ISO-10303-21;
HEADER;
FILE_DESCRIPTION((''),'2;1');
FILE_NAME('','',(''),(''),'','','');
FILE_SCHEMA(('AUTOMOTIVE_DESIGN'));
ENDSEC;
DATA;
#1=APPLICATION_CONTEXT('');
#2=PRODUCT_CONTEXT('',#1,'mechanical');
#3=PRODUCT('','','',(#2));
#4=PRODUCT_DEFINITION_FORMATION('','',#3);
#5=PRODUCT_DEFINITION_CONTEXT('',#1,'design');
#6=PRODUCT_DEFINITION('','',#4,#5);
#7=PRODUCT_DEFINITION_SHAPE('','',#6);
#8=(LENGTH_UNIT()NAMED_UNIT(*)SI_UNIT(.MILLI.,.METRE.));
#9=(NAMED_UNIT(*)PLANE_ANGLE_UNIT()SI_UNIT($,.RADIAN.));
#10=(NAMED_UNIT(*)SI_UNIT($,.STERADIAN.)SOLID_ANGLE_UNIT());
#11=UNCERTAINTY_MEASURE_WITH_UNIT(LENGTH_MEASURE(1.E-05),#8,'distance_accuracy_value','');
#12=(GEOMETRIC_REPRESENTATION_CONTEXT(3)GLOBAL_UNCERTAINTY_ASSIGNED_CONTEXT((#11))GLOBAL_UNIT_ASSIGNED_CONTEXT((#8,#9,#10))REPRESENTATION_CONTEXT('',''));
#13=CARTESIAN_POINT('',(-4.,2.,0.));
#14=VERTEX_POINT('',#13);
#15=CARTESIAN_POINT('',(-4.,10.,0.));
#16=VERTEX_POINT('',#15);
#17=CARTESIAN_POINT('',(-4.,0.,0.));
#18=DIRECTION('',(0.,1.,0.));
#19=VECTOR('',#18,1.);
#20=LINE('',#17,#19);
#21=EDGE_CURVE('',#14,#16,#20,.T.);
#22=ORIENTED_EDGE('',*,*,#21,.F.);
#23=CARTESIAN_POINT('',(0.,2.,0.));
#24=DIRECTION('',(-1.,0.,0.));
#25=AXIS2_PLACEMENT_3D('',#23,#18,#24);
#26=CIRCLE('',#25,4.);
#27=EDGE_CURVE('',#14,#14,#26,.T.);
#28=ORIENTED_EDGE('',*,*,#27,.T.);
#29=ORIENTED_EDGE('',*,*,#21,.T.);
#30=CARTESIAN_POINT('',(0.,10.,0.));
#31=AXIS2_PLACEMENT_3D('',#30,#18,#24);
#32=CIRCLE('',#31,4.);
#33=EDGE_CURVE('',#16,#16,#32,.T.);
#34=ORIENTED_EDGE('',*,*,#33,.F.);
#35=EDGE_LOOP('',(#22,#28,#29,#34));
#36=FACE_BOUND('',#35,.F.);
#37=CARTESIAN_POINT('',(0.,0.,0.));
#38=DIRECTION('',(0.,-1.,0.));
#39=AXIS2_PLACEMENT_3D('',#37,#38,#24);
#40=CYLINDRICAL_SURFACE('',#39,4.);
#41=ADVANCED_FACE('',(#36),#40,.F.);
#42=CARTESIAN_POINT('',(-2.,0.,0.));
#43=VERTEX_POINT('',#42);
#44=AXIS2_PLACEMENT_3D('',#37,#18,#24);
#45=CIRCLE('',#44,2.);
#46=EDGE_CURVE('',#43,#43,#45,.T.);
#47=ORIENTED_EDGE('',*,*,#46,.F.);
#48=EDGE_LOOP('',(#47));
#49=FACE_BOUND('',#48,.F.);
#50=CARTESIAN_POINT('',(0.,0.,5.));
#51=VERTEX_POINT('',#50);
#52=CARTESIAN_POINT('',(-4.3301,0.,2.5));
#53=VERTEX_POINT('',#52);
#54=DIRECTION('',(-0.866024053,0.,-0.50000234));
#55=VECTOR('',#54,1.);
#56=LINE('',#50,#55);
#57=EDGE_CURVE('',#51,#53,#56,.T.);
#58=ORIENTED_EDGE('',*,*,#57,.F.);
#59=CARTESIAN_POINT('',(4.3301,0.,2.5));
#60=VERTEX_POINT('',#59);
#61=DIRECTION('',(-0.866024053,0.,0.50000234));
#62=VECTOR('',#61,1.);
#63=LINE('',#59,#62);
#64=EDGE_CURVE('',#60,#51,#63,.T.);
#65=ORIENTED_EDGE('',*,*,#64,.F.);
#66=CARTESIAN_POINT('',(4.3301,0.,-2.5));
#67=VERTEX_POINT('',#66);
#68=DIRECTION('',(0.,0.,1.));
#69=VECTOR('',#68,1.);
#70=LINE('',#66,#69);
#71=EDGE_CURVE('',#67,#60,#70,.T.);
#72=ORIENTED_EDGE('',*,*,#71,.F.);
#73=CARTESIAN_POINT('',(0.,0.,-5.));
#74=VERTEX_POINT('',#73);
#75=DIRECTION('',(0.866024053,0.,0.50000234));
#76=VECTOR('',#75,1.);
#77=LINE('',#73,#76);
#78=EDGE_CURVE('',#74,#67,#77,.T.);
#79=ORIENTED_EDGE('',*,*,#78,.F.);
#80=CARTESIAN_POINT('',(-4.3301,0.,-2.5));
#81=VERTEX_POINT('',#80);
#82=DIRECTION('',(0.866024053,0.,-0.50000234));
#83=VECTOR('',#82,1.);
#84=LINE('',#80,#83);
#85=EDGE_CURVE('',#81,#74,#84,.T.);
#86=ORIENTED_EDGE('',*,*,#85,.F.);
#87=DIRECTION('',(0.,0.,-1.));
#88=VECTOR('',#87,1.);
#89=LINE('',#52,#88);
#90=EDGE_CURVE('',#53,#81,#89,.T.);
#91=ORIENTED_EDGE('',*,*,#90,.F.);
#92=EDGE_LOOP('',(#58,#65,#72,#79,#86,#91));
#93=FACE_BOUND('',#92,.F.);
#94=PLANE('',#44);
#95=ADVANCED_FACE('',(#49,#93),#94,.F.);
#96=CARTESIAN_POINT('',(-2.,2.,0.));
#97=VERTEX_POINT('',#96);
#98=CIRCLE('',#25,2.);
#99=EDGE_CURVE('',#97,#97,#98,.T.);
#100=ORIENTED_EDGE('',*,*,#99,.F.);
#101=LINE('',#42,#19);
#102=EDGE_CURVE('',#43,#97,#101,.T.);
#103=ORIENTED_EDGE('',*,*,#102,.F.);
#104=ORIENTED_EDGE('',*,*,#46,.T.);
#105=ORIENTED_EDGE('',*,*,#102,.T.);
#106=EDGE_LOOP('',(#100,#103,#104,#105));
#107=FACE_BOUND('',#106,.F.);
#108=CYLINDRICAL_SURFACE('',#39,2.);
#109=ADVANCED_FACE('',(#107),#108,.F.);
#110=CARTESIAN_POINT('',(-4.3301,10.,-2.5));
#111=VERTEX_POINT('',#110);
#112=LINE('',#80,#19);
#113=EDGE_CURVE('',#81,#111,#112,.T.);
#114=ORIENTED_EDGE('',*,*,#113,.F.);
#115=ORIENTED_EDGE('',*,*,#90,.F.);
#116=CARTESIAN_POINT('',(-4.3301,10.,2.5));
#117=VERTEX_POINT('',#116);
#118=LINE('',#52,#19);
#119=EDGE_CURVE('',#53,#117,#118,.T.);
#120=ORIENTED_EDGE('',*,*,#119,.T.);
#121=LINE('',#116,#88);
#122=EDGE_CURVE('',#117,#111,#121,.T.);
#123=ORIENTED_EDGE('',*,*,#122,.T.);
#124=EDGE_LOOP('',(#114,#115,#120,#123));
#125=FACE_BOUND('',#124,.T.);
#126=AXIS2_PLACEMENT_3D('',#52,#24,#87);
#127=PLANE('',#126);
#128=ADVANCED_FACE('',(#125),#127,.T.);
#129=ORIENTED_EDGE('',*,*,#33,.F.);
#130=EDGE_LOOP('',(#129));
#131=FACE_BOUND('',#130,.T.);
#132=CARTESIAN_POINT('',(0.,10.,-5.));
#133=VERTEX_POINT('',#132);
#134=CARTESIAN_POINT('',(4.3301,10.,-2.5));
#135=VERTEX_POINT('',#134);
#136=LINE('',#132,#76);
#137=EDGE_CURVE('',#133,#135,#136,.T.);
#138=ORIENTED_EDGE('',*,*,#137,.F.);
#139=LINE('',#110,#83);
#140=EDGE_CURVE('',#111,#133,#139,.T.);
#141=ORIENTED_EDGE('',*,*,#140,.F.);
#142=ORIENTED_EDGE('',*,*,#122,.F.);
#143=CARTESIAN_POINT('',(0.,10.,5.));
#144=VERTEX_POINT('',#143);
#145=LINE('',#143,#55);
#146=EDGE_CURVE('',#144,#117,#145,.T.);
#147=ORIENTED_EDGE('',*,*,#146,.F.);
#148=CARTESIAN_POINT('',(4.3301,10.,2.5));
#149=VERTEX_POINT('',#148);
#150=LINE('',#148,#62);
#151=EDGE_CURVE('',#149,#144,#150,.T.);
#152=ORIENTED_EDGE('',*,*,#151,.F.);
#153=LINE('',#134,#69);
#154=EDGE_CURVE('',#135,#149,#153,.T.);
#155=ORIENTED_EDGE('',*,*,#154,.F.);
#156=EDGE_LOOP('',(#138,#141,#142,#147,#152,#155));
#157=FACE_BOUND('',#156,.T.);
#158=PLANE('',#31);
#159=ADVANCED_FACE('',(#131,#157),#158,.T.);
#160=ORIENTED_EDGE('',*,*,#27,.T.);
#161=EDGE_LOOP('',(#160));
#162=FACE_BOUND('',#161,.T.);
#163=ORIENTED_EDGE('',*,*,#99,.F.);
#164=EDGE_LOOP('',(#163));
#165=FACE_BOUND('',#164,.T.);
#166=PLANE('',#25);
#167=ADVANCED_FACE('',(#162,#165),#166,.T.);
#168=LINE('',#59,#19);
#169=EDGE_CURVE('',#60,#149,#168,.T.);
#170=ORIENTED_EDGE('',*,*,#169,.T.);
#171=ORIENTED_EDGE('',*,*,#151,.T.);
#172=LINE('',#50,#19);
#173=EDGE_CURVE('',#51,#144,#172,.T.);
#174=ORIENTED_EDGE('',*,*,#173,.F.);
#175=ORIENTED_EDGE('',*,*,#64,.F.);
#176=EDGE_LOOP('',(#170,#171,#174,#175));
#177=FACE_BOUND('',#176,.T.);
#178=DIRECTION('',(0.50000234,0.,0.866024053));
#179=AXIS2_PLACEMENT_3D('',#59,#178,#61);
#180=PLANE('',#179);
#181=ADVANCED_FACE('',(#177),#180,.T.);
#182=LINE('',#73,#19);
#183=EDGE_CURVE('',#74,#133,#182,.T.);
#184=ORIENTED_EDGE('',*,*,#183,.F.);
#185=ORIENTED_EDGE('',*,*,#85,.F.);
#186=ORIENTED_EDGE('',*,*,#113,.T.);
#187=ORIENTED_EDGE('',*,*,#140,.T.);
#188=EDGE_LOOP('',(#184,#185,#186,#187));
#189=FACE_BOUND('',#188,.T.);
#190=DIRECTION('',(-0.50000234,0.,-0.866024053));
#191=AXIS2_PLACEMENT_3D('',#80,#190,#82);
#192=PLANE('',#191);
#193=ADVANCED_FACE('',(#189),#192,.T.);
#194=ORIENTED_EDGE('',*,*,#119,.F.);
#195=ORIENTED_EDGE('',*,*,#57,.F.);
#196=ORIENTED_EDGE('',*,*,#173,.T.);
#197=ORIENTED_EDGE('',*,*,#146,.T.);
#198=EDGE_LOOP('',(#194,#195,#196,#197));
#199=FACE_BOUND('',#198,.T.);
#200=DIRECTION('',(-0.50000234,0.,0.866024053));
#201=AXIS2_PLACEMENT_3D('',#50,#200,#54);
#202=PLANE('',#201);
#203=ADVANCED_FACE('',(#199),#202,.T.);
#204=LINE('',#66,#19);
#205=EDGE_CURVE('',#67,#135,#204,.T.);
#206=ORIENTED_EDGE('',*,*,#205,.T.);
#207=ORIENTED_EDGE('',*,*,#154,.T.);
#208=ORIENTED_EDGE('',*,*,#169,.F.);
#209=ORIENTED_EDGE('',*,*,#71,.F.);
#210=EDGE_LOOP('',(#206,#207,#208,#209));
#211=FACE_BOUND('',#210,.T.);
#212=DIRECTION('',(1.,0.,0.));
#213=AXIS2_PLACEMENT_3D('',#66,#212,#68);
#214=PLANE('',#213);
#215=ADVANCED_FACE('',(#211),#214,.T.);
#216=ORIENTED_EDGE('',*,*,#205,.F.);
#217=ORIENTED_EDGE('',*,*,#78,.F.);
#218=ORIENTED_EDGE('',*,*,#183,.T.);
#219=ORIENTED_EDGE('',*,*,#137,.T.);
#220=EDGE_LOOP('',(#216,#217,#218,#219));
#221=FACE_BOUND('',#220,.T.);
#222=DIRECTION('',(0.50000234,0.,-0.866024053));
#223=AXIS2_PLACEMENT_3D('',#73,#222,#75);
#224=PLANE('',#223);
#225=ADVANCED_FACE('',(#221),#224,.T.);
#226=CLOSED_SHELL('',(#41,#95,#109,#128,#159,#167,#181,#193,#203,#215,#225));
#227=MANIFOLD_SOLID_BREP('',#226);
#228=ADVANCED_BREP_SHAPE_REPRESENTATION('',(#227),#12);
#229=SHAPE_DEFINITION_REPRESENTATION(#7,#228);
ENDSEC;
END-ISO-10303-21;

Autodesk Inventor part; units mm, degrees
ref_plane "YZ Plane" through (0, 0, 0) normal (1, 0, 0) x (0, 1, 0)
ref_plane "XZ Plane" through (0, 0, 0) normal (0, 1, 0) x (-1, 0, 0)
ref_plane "XY Plane" through (0, 0, 0) normal (0, 0, 1) x (1, 0, 0)
sketch "Boceto1" plane through (0, 0, 0) normal (0, 1, 0) x (-1, 0, 0)
  line L0 (0, 5) -> (4.3301, 2.5)
  line L1 (4.3301, 2.5) -> (4.3301, -2.5)
  line L2 (4.3301, -2.5) -> (0, -5)
  line L3 (0, -5) -> (-4.3301, -2.5)
  line L4 (-4.3301, -2.5) -> (-4.3301, 2.5)
  line L5 (-4.3301, 2.5) -> (0, 5)
  circle A0 centre (0, 0) radius 4
  circle A1 centre (0, 0) radius 2
  dimension "d0" = 10
  dimension "d1" = 8
  dimension "d2" = 4
extrude "Extrusión1" add sketch "Boceto1" along normal blind 10 contours L0 L1 L2 L3 L4 L5
extrude "Extrusión2" add sketch "Boceto1" along normal blind 2 contours A0
thread "Rosca1" size "M8x0.75" class "6H" standard "ANSI Metric M Profile" length 6
properties part number "Pieza 1 subensamble 1-69" material "Latón, amarillo claro"
